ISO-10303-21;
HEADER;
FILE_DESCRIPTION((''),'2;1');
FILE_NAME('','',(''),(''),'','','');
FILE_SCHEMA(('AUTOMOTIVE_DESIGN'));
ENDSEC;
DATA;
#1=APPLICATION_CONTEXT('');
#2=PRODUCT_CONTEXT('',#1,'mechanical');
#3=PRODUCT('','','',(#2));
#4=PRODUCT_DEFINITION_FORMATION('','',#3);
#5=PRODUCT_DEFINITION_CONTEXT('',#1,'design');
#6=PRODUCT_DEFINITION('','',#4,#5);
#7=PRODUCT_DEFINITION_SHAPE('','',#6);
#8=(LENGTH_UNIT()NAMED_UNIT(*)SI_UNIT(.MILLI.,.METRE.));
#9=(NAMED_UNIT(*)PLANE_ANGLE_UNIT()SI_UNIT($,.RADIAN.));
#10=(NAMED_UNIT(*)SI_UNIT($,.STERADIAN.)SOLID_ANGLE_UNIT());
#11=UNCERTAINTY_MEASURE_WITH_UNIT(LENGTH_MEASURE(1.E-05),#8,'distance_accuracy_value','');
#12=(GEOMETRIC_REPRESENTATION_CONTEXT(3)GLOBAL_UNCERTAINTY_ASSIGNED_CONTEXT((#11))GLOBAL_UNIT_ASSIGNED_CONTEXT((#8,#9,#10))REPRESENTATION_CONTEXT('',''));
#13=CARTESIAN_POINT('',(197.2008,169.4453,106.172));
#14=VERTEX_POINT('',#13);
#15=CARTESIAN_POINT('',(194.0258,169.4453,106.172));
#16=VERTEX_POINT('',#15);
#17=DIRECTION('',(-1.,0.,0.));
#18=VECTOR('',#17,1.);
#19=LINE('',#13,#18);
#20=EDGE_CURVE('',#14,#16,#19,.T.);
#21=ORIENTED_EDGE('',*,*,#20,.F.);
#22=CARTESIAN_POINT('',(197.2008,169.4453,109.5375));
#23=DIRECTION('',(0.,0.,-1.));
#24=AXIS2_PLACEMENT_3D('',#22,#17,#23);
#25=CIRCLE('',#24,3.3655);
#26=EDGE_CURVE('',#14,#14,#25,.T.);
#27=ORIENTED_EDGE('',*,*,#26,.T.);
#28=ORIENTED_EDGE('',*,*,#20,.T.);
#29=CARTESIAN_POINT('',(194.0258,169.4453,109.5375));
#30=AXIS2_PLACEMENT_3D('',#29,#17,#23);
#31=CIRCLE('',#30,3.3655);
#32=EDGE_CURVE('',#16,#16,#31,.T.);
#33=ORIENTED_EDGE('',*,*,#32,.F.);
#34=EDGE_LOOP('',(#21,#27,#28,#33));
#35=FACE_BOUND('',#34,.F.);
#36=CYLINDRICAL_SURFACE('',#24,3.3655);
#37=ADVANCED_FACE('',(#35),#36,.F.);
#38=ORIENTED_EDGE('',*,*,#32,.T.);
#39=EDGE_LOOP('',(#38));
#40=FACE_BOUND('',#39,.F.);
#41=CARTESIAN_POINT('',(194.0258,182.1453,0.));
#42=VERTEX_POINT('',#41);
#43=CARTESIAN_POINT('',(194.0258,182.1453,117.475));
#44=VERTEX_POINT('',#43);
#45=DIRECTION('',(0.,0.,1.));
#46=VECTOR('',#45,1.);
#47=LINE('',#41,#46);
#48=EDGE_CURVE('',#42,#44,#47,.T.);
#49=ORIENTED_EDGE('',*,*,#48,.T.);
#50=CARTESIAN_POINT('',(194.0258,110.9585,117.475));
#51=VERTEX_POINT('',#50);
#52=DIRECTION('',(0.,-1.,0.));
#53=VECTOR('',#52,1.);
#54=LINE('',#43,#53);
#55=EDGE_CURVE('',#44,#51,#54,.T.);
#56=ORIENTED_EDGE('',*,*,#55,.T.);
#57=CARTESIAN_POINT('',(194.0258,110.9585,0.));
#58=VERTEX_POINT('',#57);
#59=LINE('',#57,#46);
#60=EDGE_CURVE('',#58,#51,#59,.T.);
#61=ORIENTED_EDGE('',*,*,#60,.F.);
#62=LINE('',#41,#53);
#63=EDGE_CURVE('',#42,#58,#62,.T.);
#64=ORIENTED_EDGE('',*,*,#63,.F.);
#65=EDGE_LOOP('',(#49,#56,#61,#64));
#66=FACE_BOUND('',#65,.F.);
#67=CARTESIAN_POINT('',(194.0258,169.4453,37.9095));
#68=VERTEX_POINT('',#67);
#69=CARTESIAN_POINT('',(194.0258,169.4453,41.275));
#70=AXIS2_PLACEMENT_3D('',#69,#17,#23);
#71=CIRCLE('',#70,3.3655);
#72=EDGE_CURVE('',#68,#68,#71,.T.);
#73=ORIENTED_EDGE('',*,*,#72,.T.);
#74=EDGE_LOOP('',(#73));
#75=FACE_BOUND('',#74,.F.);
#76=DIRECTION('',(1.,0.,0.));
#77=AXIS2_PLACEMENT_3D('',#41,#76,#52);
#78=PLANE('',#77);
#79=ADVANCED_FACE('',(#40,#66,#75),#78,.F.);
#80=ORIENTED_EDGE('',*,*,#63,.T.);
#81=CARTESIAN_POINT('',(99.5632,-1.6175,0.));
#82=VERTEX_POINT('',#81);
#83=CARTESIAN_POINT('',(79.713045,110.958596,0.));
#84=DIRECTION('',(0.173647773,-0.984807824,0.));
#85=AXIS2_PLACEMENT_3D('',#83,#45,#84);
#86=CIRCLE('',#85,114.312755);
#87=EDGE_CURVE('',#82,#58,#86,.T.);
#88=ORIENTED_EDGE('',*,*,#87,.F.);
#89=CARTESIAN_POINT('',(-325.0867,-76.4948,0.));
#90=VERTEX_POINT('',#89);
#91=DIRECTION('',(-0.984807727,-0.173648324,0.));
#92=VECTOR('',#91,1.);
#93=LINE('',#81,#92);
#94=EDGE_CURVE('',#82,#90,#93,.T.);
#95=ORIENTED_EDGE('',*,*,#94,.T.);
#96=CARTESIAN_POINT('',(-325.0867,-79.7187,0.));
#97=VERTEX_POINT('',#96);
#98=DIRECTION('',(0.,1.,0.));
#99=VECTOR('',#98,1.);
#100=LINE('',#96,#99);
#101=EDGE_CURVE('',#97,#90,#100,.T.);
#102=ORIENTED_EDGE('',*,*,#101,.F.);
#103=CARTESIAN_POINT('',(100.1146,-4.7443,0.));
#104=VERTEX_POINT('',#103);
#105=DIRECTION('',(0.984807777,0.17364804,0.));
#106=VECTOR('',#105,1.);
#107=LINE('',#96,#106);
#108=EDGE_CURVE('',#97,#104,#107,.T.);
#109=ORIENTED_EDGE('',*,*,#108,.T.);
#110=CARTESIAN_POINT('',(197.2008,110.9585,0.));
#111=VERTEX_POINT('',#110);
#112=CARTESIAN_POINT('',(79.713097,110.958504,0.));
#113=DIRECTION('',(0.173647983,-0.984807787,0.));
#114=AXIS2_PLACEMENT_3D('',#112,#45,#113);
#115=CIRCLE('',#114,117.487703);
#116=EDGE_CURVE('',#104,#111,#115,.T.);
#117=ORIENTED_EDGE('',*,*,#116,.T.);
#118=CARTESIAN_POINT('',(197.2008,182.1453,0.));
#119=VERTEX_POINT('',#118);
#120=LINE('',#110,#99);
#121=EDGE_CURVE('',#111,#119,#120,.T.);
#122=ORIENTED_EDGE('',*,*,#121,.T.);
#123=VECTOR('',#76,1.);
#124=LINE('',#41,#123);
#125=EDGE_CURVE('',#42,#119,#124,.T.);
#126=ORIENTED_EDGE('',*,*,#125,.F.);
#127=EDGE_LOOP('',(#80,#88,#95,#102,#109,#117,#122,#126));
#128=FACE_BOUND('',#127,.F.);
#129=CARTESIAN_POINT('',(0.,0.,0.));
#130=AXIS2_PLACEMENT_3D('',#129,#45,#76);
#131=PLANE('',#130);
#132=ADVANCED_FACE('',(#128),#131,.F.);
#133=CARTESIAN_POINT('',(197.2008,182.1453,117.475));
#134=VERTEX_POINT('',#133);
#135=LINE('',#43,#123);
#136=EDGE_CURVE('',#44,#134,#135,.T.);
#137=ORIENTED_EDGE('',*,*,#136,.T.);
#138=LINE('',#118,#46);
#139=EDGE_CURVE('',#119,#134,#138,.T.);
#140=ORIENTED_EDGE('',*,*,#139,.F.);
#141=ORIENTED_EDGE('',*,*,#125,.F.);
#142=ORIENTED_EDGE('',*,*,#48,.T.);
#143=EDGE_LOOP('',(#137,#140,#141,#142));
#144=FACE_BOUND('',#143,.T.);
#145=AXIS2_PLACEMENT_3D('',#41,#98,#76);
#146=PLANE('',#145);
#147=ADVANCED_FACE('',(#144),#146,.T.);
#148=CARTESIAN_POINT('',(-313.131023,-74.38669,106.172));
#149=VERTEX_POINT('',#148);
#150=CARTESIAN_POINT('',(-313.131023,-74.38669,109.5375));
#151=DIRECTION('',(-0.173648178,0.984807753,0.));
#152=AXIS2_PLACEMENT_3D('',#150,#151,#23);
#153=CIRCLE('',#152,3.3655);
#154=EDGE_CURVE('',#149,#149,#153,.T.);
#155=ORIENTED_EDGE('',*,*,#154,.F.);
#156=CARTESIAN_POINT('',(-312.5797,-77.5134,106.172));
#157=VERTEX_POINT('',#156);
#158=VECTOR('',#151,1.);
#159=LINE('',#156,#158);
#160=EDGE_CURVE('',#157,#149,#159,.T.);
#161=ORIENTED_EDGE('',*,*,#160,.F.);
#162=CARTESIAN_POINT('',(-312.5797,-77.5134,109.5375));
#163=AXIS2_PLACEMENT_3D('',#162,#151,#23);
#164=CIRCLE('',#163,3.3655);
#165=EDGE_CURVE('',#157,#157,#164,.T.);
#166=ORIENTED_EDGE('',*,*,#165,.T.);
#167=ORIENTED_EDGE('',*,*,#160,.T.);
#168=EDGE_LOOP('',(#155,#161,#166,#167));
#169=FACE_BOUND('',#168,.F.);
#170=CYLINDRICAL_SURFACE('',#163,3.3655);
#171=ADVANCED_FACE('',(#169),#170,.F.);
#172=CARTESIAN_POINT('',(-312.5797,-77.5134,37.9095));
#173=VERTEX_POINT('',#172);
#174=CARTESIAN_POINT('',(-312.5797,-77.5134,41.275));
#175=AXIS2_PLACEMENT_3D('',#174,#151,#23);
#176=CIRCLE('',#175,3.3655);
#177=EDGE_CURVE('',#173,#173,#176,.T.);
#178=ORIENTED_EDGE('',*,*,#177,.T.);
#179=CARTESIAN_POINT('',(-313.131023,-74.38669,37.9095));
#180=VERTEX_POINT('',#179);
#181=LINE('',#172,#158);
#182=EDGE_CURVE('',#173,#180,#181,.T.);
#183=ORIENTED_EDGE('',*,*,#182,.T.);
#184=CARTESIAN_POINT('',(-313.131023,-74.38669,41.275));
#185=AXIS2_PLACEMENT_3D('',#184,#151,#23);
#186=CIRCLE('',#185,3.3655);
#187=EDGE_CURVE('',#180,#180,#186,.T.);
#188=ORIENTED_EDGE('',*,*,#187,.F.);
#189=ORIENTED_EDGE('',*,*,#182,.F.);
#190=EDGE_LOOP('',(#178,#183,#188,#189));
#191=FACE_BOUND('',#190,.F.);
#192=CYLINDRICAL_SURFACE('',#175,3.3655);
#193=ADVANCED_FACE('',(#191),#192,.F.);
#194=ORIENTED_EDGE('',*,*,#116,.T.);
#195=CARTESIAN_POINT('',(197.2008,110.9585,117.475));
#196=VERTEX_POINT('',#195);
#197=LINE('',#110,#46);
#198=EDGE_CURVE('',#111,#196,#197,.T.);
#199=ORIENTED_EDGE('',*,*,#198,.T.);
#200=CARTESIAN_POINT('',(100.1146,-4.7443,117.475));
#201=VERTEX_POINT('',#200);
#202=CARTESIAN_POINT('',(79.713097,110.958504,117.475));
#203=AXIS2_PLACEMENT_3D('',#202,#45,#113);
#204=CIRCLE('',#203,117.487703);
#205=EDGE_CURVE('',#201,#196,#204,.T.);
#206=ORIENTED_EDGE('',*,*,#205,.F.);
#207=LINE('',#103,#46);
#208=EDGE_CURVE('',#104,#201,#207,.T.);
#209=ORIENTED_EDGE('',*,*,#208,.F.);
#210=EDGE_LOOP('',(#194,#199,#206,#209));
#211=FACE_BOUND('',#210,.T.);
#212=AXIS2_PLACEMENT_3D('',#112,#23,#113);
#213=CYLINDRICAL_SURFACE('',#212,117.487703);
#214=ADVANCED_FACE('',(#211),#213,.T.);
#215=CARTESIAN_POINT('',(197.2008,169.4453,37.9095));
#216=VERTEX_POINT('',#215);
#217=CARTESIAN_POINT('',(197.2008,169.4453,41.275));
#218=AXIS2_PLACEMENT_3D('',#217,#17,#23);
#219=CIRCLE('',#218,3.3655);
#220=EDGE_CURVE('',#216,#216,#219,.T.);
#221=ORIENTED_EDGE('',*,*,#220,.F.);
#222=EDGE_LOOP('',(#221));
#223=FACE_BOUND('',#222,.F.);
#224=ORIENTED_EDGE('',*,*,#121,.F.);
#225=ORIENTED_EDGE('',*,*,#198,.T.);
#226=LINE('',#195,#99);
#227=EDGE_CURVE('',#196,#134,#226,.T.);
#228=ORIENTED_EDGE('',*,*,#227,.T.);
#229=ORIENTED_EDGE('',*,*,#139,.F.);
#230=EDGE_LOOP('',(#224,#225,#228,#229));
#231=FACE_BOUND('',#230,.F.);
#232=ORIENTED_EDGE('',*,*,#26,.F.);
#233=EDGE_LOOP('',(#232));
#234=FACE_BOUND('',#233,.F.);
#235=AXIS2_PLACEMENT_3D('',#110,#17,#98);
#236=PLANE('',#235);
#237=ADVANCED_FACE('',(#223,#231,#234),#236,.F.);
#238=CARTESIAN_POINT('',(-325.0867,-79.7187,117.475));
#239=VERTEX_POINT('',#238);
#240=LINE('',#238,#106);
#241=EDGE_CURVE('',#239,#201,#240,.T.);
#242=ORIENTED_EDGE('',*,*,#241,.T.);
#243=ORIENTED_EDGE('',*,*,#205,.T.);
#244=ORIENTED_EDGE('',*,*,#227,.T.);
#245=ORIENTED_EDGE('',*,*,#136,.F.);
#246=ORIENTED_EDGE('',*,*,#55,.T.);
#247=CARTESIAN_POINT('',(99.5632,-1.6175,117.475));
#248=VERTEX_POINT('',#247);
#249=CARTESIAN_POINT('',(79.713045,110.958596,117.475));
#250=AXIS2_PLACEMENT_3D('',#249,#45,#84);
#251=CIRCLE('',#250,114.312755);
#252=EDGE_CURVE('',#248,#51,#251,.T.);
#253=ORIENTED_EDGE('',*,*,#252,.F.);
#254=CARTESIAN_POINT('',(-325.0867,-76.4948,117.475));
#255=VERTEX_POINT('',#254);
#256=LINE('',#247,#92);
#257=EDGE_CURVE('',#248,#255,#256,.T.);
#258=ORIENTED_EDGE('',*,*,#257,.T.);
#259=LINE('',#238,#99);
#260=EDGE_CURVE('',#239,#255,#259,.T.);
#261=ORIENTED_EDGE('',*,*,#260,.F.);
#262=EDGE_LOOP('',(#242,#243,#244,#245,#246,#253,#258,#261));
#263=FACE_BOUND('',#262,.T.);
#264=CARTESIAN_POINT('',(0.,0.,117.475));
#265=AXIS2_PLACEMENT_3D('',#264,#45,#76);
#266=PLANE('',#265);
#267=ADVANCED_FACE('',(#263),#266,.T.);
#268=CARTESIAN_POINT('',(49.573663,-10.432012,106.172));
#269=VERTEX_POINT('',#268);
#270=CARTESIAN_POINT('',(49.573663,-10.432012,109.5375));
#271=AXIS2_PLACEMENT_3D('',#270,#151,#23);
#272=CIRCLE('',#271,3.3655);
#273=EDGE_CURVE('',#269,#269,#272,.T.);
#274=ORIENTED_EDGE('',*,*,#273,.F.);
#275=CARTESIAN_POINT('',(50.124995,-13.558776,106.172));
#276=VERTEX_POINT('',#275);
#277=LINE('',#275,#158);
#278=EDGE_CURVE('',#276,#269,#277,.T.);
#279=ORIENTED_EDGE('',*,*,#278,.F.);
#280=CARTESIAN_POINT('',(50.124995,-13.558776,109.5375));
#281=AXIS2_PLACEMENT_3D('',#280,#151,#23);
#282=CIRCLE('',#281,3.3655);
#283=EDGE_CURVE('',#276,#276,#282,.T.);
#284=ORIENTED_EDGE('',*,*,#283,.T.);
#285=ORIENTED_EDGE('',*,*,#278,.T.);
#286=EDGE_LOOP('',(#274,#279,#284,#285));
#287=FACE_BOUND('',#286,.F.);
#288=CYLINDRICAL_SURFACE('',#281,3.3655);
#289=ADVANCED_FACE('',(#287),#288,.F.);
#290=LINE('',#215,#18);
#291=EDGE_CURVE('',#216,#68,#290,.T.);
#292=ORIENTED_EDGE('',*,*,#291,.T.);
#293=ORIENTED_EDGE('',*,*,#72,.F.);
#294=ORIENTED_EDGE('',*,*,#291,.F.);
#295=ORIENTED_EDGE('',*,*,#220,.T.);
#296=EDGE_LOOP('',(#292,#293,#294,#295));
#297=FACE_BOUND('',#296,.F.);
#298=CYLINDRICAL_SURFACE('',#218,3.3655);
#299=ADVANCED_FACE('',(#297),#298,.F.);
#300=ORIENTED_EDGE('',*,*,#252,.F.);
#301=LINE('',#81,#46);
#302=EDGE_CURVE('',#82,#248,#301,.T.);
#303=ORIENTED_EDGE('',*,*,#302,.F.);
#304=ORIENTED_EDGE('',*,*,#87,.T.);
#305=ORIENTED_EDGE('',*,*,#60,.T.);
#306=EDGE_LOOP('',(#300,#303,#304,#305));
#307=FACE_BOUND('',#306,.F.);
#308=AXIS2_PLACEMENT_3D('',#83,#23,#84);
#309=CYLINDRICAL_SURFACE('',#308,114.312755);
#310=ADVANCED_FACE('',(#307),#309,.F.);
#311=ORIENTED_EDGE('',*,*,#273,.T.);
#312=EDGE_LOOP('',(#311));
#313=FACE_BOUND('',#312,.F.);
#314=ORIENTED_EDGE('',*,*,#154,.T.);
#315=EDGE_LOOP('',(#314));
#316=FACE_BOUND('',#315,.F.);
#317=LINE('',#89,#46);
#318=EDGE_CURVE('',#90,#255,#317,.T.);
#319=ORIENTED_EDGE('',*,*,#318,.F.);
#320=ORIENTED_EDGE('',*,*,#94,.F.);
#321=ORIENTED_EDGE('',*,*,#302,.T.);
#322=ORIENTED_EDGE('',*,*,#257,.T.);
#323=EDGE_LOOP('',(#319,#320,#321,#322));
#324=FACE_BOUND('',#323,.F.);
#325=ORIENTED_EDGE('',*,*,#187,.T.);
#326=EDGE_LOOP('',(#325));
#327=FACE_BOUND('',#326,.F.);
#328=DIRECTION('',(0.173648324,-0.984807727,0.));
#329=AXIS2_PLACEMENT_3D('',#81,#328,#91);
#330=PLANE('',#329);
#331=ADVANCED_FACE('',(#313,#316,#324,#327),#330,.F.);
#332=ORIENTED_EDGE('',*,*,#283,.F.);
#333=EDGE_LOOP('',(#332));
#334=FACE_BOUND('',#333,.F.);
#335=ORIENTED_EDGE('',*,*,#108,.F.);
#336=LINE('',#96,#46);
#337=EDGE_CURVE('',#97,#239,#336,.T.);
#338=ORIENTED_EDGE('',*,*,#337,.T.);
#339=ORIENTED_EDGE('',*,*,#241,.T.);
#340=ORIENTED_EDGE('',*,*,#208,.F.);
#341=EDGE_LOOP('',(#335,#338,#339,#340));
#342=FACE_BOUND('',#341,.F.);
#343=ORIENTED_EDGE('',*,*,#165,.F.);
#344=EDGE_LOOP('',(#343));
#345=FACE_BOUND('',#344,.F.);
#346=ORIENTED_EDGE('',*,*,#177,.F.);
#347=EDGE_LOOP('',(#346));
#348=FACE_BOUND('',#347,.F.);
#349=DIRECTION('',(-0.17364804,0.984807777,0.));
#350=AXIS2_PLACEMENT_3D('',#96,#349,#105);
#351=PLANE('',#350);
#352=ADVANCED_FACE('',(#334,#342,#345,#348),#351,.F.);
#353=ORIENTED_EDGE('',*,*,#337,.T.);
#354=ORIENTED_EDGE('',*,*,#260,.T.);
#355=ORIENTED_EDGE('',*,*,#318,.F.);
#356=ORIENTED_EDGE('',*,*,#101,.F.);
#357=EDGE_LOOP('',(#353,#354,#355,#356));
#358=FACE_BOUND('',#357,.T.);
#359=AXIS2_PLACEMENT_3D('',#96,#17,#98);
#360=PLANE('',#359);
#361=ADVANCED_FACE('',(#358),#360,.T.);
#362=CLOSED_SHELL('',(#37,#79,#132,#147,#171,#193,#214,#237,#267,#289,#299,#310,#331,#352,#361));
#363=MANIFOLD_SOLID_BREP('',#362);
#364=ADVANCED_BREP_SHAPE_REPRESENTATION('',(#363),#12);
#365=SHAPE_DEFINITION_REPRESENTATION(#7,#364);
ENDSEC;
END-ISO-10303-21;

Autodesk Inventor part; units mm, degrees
ref_plane "YZ Plane" through (0, 0, 0) normal (1, 0, 0) x (0, 1, 0)
ref_plane "XZ Plane" through (0, 0, 0) normal (0, 1, 0) x (-1, 0, 0)
ref_plane "XY Plane" through (0, 0, 0) normal (0, 0, 1) x (1, 0, 0)
sketch "Sketch1" plane through (0, 0, 0) normal (0, 0, 1) x (1, 0, 0)
  line L0 (-325.0867, -79.7187) -> (100.1146, -4.7443) projected
  arc A0 (100.1146, -4.7443) -> (197.2008, 110.9585) centre (79.7131, 110.9585) ccw projected
  line L1 (197.2008, 110.9585) -> (197.2008, 182.1453) projected
  line L2 (194.0258, 182.1453) -> (197.2008, 182.1453) projected
  line L3 (194.0258, 182.1453) -> (194.0258, 110.9585) projected
  arc A1 (99.5632, -1.6175) -> (194.0258, 110.9585) centre (79.7131, 110.9585) ccw projected
  line L4 (99.5632, -1.6175) -> (-325.0867, -76.4948) projected
  line L5 (-325.0867, -79.7187) -> (-325.0867, -76.4948) projected
  point P0 (0, 0)
extrude "Extrusion1" add sketch "Sketch1" along normal blind 117.475
hole "Hole1" at (197.2008, 169.4453, 109.5375) direction (-1, 0, 0) diameter 6.731 depth 25.4 tip angle 118
pattern_linear "Rectangular Pattern1" count 2 spacing 68.2625 along (0, 0, -1) of "Hole1"
hole "Hole2" at (-312.5797, -77.5134, 109.5375) direction (-0.1736482, 0.9848078, 0) diameter 6.731 depth 25.4 tip angle 118
pattern_linear "Rectangular Pattern2" count 2 spacing 68.2625 along (0, 0, -1) of "Hole2"
pattern_linear "Rectangular Pattern3" count 2 spacing 368.3 along (0.9848078, 0.1736482, 0) of "Hole2"
properties part number "GE-12087-02"
